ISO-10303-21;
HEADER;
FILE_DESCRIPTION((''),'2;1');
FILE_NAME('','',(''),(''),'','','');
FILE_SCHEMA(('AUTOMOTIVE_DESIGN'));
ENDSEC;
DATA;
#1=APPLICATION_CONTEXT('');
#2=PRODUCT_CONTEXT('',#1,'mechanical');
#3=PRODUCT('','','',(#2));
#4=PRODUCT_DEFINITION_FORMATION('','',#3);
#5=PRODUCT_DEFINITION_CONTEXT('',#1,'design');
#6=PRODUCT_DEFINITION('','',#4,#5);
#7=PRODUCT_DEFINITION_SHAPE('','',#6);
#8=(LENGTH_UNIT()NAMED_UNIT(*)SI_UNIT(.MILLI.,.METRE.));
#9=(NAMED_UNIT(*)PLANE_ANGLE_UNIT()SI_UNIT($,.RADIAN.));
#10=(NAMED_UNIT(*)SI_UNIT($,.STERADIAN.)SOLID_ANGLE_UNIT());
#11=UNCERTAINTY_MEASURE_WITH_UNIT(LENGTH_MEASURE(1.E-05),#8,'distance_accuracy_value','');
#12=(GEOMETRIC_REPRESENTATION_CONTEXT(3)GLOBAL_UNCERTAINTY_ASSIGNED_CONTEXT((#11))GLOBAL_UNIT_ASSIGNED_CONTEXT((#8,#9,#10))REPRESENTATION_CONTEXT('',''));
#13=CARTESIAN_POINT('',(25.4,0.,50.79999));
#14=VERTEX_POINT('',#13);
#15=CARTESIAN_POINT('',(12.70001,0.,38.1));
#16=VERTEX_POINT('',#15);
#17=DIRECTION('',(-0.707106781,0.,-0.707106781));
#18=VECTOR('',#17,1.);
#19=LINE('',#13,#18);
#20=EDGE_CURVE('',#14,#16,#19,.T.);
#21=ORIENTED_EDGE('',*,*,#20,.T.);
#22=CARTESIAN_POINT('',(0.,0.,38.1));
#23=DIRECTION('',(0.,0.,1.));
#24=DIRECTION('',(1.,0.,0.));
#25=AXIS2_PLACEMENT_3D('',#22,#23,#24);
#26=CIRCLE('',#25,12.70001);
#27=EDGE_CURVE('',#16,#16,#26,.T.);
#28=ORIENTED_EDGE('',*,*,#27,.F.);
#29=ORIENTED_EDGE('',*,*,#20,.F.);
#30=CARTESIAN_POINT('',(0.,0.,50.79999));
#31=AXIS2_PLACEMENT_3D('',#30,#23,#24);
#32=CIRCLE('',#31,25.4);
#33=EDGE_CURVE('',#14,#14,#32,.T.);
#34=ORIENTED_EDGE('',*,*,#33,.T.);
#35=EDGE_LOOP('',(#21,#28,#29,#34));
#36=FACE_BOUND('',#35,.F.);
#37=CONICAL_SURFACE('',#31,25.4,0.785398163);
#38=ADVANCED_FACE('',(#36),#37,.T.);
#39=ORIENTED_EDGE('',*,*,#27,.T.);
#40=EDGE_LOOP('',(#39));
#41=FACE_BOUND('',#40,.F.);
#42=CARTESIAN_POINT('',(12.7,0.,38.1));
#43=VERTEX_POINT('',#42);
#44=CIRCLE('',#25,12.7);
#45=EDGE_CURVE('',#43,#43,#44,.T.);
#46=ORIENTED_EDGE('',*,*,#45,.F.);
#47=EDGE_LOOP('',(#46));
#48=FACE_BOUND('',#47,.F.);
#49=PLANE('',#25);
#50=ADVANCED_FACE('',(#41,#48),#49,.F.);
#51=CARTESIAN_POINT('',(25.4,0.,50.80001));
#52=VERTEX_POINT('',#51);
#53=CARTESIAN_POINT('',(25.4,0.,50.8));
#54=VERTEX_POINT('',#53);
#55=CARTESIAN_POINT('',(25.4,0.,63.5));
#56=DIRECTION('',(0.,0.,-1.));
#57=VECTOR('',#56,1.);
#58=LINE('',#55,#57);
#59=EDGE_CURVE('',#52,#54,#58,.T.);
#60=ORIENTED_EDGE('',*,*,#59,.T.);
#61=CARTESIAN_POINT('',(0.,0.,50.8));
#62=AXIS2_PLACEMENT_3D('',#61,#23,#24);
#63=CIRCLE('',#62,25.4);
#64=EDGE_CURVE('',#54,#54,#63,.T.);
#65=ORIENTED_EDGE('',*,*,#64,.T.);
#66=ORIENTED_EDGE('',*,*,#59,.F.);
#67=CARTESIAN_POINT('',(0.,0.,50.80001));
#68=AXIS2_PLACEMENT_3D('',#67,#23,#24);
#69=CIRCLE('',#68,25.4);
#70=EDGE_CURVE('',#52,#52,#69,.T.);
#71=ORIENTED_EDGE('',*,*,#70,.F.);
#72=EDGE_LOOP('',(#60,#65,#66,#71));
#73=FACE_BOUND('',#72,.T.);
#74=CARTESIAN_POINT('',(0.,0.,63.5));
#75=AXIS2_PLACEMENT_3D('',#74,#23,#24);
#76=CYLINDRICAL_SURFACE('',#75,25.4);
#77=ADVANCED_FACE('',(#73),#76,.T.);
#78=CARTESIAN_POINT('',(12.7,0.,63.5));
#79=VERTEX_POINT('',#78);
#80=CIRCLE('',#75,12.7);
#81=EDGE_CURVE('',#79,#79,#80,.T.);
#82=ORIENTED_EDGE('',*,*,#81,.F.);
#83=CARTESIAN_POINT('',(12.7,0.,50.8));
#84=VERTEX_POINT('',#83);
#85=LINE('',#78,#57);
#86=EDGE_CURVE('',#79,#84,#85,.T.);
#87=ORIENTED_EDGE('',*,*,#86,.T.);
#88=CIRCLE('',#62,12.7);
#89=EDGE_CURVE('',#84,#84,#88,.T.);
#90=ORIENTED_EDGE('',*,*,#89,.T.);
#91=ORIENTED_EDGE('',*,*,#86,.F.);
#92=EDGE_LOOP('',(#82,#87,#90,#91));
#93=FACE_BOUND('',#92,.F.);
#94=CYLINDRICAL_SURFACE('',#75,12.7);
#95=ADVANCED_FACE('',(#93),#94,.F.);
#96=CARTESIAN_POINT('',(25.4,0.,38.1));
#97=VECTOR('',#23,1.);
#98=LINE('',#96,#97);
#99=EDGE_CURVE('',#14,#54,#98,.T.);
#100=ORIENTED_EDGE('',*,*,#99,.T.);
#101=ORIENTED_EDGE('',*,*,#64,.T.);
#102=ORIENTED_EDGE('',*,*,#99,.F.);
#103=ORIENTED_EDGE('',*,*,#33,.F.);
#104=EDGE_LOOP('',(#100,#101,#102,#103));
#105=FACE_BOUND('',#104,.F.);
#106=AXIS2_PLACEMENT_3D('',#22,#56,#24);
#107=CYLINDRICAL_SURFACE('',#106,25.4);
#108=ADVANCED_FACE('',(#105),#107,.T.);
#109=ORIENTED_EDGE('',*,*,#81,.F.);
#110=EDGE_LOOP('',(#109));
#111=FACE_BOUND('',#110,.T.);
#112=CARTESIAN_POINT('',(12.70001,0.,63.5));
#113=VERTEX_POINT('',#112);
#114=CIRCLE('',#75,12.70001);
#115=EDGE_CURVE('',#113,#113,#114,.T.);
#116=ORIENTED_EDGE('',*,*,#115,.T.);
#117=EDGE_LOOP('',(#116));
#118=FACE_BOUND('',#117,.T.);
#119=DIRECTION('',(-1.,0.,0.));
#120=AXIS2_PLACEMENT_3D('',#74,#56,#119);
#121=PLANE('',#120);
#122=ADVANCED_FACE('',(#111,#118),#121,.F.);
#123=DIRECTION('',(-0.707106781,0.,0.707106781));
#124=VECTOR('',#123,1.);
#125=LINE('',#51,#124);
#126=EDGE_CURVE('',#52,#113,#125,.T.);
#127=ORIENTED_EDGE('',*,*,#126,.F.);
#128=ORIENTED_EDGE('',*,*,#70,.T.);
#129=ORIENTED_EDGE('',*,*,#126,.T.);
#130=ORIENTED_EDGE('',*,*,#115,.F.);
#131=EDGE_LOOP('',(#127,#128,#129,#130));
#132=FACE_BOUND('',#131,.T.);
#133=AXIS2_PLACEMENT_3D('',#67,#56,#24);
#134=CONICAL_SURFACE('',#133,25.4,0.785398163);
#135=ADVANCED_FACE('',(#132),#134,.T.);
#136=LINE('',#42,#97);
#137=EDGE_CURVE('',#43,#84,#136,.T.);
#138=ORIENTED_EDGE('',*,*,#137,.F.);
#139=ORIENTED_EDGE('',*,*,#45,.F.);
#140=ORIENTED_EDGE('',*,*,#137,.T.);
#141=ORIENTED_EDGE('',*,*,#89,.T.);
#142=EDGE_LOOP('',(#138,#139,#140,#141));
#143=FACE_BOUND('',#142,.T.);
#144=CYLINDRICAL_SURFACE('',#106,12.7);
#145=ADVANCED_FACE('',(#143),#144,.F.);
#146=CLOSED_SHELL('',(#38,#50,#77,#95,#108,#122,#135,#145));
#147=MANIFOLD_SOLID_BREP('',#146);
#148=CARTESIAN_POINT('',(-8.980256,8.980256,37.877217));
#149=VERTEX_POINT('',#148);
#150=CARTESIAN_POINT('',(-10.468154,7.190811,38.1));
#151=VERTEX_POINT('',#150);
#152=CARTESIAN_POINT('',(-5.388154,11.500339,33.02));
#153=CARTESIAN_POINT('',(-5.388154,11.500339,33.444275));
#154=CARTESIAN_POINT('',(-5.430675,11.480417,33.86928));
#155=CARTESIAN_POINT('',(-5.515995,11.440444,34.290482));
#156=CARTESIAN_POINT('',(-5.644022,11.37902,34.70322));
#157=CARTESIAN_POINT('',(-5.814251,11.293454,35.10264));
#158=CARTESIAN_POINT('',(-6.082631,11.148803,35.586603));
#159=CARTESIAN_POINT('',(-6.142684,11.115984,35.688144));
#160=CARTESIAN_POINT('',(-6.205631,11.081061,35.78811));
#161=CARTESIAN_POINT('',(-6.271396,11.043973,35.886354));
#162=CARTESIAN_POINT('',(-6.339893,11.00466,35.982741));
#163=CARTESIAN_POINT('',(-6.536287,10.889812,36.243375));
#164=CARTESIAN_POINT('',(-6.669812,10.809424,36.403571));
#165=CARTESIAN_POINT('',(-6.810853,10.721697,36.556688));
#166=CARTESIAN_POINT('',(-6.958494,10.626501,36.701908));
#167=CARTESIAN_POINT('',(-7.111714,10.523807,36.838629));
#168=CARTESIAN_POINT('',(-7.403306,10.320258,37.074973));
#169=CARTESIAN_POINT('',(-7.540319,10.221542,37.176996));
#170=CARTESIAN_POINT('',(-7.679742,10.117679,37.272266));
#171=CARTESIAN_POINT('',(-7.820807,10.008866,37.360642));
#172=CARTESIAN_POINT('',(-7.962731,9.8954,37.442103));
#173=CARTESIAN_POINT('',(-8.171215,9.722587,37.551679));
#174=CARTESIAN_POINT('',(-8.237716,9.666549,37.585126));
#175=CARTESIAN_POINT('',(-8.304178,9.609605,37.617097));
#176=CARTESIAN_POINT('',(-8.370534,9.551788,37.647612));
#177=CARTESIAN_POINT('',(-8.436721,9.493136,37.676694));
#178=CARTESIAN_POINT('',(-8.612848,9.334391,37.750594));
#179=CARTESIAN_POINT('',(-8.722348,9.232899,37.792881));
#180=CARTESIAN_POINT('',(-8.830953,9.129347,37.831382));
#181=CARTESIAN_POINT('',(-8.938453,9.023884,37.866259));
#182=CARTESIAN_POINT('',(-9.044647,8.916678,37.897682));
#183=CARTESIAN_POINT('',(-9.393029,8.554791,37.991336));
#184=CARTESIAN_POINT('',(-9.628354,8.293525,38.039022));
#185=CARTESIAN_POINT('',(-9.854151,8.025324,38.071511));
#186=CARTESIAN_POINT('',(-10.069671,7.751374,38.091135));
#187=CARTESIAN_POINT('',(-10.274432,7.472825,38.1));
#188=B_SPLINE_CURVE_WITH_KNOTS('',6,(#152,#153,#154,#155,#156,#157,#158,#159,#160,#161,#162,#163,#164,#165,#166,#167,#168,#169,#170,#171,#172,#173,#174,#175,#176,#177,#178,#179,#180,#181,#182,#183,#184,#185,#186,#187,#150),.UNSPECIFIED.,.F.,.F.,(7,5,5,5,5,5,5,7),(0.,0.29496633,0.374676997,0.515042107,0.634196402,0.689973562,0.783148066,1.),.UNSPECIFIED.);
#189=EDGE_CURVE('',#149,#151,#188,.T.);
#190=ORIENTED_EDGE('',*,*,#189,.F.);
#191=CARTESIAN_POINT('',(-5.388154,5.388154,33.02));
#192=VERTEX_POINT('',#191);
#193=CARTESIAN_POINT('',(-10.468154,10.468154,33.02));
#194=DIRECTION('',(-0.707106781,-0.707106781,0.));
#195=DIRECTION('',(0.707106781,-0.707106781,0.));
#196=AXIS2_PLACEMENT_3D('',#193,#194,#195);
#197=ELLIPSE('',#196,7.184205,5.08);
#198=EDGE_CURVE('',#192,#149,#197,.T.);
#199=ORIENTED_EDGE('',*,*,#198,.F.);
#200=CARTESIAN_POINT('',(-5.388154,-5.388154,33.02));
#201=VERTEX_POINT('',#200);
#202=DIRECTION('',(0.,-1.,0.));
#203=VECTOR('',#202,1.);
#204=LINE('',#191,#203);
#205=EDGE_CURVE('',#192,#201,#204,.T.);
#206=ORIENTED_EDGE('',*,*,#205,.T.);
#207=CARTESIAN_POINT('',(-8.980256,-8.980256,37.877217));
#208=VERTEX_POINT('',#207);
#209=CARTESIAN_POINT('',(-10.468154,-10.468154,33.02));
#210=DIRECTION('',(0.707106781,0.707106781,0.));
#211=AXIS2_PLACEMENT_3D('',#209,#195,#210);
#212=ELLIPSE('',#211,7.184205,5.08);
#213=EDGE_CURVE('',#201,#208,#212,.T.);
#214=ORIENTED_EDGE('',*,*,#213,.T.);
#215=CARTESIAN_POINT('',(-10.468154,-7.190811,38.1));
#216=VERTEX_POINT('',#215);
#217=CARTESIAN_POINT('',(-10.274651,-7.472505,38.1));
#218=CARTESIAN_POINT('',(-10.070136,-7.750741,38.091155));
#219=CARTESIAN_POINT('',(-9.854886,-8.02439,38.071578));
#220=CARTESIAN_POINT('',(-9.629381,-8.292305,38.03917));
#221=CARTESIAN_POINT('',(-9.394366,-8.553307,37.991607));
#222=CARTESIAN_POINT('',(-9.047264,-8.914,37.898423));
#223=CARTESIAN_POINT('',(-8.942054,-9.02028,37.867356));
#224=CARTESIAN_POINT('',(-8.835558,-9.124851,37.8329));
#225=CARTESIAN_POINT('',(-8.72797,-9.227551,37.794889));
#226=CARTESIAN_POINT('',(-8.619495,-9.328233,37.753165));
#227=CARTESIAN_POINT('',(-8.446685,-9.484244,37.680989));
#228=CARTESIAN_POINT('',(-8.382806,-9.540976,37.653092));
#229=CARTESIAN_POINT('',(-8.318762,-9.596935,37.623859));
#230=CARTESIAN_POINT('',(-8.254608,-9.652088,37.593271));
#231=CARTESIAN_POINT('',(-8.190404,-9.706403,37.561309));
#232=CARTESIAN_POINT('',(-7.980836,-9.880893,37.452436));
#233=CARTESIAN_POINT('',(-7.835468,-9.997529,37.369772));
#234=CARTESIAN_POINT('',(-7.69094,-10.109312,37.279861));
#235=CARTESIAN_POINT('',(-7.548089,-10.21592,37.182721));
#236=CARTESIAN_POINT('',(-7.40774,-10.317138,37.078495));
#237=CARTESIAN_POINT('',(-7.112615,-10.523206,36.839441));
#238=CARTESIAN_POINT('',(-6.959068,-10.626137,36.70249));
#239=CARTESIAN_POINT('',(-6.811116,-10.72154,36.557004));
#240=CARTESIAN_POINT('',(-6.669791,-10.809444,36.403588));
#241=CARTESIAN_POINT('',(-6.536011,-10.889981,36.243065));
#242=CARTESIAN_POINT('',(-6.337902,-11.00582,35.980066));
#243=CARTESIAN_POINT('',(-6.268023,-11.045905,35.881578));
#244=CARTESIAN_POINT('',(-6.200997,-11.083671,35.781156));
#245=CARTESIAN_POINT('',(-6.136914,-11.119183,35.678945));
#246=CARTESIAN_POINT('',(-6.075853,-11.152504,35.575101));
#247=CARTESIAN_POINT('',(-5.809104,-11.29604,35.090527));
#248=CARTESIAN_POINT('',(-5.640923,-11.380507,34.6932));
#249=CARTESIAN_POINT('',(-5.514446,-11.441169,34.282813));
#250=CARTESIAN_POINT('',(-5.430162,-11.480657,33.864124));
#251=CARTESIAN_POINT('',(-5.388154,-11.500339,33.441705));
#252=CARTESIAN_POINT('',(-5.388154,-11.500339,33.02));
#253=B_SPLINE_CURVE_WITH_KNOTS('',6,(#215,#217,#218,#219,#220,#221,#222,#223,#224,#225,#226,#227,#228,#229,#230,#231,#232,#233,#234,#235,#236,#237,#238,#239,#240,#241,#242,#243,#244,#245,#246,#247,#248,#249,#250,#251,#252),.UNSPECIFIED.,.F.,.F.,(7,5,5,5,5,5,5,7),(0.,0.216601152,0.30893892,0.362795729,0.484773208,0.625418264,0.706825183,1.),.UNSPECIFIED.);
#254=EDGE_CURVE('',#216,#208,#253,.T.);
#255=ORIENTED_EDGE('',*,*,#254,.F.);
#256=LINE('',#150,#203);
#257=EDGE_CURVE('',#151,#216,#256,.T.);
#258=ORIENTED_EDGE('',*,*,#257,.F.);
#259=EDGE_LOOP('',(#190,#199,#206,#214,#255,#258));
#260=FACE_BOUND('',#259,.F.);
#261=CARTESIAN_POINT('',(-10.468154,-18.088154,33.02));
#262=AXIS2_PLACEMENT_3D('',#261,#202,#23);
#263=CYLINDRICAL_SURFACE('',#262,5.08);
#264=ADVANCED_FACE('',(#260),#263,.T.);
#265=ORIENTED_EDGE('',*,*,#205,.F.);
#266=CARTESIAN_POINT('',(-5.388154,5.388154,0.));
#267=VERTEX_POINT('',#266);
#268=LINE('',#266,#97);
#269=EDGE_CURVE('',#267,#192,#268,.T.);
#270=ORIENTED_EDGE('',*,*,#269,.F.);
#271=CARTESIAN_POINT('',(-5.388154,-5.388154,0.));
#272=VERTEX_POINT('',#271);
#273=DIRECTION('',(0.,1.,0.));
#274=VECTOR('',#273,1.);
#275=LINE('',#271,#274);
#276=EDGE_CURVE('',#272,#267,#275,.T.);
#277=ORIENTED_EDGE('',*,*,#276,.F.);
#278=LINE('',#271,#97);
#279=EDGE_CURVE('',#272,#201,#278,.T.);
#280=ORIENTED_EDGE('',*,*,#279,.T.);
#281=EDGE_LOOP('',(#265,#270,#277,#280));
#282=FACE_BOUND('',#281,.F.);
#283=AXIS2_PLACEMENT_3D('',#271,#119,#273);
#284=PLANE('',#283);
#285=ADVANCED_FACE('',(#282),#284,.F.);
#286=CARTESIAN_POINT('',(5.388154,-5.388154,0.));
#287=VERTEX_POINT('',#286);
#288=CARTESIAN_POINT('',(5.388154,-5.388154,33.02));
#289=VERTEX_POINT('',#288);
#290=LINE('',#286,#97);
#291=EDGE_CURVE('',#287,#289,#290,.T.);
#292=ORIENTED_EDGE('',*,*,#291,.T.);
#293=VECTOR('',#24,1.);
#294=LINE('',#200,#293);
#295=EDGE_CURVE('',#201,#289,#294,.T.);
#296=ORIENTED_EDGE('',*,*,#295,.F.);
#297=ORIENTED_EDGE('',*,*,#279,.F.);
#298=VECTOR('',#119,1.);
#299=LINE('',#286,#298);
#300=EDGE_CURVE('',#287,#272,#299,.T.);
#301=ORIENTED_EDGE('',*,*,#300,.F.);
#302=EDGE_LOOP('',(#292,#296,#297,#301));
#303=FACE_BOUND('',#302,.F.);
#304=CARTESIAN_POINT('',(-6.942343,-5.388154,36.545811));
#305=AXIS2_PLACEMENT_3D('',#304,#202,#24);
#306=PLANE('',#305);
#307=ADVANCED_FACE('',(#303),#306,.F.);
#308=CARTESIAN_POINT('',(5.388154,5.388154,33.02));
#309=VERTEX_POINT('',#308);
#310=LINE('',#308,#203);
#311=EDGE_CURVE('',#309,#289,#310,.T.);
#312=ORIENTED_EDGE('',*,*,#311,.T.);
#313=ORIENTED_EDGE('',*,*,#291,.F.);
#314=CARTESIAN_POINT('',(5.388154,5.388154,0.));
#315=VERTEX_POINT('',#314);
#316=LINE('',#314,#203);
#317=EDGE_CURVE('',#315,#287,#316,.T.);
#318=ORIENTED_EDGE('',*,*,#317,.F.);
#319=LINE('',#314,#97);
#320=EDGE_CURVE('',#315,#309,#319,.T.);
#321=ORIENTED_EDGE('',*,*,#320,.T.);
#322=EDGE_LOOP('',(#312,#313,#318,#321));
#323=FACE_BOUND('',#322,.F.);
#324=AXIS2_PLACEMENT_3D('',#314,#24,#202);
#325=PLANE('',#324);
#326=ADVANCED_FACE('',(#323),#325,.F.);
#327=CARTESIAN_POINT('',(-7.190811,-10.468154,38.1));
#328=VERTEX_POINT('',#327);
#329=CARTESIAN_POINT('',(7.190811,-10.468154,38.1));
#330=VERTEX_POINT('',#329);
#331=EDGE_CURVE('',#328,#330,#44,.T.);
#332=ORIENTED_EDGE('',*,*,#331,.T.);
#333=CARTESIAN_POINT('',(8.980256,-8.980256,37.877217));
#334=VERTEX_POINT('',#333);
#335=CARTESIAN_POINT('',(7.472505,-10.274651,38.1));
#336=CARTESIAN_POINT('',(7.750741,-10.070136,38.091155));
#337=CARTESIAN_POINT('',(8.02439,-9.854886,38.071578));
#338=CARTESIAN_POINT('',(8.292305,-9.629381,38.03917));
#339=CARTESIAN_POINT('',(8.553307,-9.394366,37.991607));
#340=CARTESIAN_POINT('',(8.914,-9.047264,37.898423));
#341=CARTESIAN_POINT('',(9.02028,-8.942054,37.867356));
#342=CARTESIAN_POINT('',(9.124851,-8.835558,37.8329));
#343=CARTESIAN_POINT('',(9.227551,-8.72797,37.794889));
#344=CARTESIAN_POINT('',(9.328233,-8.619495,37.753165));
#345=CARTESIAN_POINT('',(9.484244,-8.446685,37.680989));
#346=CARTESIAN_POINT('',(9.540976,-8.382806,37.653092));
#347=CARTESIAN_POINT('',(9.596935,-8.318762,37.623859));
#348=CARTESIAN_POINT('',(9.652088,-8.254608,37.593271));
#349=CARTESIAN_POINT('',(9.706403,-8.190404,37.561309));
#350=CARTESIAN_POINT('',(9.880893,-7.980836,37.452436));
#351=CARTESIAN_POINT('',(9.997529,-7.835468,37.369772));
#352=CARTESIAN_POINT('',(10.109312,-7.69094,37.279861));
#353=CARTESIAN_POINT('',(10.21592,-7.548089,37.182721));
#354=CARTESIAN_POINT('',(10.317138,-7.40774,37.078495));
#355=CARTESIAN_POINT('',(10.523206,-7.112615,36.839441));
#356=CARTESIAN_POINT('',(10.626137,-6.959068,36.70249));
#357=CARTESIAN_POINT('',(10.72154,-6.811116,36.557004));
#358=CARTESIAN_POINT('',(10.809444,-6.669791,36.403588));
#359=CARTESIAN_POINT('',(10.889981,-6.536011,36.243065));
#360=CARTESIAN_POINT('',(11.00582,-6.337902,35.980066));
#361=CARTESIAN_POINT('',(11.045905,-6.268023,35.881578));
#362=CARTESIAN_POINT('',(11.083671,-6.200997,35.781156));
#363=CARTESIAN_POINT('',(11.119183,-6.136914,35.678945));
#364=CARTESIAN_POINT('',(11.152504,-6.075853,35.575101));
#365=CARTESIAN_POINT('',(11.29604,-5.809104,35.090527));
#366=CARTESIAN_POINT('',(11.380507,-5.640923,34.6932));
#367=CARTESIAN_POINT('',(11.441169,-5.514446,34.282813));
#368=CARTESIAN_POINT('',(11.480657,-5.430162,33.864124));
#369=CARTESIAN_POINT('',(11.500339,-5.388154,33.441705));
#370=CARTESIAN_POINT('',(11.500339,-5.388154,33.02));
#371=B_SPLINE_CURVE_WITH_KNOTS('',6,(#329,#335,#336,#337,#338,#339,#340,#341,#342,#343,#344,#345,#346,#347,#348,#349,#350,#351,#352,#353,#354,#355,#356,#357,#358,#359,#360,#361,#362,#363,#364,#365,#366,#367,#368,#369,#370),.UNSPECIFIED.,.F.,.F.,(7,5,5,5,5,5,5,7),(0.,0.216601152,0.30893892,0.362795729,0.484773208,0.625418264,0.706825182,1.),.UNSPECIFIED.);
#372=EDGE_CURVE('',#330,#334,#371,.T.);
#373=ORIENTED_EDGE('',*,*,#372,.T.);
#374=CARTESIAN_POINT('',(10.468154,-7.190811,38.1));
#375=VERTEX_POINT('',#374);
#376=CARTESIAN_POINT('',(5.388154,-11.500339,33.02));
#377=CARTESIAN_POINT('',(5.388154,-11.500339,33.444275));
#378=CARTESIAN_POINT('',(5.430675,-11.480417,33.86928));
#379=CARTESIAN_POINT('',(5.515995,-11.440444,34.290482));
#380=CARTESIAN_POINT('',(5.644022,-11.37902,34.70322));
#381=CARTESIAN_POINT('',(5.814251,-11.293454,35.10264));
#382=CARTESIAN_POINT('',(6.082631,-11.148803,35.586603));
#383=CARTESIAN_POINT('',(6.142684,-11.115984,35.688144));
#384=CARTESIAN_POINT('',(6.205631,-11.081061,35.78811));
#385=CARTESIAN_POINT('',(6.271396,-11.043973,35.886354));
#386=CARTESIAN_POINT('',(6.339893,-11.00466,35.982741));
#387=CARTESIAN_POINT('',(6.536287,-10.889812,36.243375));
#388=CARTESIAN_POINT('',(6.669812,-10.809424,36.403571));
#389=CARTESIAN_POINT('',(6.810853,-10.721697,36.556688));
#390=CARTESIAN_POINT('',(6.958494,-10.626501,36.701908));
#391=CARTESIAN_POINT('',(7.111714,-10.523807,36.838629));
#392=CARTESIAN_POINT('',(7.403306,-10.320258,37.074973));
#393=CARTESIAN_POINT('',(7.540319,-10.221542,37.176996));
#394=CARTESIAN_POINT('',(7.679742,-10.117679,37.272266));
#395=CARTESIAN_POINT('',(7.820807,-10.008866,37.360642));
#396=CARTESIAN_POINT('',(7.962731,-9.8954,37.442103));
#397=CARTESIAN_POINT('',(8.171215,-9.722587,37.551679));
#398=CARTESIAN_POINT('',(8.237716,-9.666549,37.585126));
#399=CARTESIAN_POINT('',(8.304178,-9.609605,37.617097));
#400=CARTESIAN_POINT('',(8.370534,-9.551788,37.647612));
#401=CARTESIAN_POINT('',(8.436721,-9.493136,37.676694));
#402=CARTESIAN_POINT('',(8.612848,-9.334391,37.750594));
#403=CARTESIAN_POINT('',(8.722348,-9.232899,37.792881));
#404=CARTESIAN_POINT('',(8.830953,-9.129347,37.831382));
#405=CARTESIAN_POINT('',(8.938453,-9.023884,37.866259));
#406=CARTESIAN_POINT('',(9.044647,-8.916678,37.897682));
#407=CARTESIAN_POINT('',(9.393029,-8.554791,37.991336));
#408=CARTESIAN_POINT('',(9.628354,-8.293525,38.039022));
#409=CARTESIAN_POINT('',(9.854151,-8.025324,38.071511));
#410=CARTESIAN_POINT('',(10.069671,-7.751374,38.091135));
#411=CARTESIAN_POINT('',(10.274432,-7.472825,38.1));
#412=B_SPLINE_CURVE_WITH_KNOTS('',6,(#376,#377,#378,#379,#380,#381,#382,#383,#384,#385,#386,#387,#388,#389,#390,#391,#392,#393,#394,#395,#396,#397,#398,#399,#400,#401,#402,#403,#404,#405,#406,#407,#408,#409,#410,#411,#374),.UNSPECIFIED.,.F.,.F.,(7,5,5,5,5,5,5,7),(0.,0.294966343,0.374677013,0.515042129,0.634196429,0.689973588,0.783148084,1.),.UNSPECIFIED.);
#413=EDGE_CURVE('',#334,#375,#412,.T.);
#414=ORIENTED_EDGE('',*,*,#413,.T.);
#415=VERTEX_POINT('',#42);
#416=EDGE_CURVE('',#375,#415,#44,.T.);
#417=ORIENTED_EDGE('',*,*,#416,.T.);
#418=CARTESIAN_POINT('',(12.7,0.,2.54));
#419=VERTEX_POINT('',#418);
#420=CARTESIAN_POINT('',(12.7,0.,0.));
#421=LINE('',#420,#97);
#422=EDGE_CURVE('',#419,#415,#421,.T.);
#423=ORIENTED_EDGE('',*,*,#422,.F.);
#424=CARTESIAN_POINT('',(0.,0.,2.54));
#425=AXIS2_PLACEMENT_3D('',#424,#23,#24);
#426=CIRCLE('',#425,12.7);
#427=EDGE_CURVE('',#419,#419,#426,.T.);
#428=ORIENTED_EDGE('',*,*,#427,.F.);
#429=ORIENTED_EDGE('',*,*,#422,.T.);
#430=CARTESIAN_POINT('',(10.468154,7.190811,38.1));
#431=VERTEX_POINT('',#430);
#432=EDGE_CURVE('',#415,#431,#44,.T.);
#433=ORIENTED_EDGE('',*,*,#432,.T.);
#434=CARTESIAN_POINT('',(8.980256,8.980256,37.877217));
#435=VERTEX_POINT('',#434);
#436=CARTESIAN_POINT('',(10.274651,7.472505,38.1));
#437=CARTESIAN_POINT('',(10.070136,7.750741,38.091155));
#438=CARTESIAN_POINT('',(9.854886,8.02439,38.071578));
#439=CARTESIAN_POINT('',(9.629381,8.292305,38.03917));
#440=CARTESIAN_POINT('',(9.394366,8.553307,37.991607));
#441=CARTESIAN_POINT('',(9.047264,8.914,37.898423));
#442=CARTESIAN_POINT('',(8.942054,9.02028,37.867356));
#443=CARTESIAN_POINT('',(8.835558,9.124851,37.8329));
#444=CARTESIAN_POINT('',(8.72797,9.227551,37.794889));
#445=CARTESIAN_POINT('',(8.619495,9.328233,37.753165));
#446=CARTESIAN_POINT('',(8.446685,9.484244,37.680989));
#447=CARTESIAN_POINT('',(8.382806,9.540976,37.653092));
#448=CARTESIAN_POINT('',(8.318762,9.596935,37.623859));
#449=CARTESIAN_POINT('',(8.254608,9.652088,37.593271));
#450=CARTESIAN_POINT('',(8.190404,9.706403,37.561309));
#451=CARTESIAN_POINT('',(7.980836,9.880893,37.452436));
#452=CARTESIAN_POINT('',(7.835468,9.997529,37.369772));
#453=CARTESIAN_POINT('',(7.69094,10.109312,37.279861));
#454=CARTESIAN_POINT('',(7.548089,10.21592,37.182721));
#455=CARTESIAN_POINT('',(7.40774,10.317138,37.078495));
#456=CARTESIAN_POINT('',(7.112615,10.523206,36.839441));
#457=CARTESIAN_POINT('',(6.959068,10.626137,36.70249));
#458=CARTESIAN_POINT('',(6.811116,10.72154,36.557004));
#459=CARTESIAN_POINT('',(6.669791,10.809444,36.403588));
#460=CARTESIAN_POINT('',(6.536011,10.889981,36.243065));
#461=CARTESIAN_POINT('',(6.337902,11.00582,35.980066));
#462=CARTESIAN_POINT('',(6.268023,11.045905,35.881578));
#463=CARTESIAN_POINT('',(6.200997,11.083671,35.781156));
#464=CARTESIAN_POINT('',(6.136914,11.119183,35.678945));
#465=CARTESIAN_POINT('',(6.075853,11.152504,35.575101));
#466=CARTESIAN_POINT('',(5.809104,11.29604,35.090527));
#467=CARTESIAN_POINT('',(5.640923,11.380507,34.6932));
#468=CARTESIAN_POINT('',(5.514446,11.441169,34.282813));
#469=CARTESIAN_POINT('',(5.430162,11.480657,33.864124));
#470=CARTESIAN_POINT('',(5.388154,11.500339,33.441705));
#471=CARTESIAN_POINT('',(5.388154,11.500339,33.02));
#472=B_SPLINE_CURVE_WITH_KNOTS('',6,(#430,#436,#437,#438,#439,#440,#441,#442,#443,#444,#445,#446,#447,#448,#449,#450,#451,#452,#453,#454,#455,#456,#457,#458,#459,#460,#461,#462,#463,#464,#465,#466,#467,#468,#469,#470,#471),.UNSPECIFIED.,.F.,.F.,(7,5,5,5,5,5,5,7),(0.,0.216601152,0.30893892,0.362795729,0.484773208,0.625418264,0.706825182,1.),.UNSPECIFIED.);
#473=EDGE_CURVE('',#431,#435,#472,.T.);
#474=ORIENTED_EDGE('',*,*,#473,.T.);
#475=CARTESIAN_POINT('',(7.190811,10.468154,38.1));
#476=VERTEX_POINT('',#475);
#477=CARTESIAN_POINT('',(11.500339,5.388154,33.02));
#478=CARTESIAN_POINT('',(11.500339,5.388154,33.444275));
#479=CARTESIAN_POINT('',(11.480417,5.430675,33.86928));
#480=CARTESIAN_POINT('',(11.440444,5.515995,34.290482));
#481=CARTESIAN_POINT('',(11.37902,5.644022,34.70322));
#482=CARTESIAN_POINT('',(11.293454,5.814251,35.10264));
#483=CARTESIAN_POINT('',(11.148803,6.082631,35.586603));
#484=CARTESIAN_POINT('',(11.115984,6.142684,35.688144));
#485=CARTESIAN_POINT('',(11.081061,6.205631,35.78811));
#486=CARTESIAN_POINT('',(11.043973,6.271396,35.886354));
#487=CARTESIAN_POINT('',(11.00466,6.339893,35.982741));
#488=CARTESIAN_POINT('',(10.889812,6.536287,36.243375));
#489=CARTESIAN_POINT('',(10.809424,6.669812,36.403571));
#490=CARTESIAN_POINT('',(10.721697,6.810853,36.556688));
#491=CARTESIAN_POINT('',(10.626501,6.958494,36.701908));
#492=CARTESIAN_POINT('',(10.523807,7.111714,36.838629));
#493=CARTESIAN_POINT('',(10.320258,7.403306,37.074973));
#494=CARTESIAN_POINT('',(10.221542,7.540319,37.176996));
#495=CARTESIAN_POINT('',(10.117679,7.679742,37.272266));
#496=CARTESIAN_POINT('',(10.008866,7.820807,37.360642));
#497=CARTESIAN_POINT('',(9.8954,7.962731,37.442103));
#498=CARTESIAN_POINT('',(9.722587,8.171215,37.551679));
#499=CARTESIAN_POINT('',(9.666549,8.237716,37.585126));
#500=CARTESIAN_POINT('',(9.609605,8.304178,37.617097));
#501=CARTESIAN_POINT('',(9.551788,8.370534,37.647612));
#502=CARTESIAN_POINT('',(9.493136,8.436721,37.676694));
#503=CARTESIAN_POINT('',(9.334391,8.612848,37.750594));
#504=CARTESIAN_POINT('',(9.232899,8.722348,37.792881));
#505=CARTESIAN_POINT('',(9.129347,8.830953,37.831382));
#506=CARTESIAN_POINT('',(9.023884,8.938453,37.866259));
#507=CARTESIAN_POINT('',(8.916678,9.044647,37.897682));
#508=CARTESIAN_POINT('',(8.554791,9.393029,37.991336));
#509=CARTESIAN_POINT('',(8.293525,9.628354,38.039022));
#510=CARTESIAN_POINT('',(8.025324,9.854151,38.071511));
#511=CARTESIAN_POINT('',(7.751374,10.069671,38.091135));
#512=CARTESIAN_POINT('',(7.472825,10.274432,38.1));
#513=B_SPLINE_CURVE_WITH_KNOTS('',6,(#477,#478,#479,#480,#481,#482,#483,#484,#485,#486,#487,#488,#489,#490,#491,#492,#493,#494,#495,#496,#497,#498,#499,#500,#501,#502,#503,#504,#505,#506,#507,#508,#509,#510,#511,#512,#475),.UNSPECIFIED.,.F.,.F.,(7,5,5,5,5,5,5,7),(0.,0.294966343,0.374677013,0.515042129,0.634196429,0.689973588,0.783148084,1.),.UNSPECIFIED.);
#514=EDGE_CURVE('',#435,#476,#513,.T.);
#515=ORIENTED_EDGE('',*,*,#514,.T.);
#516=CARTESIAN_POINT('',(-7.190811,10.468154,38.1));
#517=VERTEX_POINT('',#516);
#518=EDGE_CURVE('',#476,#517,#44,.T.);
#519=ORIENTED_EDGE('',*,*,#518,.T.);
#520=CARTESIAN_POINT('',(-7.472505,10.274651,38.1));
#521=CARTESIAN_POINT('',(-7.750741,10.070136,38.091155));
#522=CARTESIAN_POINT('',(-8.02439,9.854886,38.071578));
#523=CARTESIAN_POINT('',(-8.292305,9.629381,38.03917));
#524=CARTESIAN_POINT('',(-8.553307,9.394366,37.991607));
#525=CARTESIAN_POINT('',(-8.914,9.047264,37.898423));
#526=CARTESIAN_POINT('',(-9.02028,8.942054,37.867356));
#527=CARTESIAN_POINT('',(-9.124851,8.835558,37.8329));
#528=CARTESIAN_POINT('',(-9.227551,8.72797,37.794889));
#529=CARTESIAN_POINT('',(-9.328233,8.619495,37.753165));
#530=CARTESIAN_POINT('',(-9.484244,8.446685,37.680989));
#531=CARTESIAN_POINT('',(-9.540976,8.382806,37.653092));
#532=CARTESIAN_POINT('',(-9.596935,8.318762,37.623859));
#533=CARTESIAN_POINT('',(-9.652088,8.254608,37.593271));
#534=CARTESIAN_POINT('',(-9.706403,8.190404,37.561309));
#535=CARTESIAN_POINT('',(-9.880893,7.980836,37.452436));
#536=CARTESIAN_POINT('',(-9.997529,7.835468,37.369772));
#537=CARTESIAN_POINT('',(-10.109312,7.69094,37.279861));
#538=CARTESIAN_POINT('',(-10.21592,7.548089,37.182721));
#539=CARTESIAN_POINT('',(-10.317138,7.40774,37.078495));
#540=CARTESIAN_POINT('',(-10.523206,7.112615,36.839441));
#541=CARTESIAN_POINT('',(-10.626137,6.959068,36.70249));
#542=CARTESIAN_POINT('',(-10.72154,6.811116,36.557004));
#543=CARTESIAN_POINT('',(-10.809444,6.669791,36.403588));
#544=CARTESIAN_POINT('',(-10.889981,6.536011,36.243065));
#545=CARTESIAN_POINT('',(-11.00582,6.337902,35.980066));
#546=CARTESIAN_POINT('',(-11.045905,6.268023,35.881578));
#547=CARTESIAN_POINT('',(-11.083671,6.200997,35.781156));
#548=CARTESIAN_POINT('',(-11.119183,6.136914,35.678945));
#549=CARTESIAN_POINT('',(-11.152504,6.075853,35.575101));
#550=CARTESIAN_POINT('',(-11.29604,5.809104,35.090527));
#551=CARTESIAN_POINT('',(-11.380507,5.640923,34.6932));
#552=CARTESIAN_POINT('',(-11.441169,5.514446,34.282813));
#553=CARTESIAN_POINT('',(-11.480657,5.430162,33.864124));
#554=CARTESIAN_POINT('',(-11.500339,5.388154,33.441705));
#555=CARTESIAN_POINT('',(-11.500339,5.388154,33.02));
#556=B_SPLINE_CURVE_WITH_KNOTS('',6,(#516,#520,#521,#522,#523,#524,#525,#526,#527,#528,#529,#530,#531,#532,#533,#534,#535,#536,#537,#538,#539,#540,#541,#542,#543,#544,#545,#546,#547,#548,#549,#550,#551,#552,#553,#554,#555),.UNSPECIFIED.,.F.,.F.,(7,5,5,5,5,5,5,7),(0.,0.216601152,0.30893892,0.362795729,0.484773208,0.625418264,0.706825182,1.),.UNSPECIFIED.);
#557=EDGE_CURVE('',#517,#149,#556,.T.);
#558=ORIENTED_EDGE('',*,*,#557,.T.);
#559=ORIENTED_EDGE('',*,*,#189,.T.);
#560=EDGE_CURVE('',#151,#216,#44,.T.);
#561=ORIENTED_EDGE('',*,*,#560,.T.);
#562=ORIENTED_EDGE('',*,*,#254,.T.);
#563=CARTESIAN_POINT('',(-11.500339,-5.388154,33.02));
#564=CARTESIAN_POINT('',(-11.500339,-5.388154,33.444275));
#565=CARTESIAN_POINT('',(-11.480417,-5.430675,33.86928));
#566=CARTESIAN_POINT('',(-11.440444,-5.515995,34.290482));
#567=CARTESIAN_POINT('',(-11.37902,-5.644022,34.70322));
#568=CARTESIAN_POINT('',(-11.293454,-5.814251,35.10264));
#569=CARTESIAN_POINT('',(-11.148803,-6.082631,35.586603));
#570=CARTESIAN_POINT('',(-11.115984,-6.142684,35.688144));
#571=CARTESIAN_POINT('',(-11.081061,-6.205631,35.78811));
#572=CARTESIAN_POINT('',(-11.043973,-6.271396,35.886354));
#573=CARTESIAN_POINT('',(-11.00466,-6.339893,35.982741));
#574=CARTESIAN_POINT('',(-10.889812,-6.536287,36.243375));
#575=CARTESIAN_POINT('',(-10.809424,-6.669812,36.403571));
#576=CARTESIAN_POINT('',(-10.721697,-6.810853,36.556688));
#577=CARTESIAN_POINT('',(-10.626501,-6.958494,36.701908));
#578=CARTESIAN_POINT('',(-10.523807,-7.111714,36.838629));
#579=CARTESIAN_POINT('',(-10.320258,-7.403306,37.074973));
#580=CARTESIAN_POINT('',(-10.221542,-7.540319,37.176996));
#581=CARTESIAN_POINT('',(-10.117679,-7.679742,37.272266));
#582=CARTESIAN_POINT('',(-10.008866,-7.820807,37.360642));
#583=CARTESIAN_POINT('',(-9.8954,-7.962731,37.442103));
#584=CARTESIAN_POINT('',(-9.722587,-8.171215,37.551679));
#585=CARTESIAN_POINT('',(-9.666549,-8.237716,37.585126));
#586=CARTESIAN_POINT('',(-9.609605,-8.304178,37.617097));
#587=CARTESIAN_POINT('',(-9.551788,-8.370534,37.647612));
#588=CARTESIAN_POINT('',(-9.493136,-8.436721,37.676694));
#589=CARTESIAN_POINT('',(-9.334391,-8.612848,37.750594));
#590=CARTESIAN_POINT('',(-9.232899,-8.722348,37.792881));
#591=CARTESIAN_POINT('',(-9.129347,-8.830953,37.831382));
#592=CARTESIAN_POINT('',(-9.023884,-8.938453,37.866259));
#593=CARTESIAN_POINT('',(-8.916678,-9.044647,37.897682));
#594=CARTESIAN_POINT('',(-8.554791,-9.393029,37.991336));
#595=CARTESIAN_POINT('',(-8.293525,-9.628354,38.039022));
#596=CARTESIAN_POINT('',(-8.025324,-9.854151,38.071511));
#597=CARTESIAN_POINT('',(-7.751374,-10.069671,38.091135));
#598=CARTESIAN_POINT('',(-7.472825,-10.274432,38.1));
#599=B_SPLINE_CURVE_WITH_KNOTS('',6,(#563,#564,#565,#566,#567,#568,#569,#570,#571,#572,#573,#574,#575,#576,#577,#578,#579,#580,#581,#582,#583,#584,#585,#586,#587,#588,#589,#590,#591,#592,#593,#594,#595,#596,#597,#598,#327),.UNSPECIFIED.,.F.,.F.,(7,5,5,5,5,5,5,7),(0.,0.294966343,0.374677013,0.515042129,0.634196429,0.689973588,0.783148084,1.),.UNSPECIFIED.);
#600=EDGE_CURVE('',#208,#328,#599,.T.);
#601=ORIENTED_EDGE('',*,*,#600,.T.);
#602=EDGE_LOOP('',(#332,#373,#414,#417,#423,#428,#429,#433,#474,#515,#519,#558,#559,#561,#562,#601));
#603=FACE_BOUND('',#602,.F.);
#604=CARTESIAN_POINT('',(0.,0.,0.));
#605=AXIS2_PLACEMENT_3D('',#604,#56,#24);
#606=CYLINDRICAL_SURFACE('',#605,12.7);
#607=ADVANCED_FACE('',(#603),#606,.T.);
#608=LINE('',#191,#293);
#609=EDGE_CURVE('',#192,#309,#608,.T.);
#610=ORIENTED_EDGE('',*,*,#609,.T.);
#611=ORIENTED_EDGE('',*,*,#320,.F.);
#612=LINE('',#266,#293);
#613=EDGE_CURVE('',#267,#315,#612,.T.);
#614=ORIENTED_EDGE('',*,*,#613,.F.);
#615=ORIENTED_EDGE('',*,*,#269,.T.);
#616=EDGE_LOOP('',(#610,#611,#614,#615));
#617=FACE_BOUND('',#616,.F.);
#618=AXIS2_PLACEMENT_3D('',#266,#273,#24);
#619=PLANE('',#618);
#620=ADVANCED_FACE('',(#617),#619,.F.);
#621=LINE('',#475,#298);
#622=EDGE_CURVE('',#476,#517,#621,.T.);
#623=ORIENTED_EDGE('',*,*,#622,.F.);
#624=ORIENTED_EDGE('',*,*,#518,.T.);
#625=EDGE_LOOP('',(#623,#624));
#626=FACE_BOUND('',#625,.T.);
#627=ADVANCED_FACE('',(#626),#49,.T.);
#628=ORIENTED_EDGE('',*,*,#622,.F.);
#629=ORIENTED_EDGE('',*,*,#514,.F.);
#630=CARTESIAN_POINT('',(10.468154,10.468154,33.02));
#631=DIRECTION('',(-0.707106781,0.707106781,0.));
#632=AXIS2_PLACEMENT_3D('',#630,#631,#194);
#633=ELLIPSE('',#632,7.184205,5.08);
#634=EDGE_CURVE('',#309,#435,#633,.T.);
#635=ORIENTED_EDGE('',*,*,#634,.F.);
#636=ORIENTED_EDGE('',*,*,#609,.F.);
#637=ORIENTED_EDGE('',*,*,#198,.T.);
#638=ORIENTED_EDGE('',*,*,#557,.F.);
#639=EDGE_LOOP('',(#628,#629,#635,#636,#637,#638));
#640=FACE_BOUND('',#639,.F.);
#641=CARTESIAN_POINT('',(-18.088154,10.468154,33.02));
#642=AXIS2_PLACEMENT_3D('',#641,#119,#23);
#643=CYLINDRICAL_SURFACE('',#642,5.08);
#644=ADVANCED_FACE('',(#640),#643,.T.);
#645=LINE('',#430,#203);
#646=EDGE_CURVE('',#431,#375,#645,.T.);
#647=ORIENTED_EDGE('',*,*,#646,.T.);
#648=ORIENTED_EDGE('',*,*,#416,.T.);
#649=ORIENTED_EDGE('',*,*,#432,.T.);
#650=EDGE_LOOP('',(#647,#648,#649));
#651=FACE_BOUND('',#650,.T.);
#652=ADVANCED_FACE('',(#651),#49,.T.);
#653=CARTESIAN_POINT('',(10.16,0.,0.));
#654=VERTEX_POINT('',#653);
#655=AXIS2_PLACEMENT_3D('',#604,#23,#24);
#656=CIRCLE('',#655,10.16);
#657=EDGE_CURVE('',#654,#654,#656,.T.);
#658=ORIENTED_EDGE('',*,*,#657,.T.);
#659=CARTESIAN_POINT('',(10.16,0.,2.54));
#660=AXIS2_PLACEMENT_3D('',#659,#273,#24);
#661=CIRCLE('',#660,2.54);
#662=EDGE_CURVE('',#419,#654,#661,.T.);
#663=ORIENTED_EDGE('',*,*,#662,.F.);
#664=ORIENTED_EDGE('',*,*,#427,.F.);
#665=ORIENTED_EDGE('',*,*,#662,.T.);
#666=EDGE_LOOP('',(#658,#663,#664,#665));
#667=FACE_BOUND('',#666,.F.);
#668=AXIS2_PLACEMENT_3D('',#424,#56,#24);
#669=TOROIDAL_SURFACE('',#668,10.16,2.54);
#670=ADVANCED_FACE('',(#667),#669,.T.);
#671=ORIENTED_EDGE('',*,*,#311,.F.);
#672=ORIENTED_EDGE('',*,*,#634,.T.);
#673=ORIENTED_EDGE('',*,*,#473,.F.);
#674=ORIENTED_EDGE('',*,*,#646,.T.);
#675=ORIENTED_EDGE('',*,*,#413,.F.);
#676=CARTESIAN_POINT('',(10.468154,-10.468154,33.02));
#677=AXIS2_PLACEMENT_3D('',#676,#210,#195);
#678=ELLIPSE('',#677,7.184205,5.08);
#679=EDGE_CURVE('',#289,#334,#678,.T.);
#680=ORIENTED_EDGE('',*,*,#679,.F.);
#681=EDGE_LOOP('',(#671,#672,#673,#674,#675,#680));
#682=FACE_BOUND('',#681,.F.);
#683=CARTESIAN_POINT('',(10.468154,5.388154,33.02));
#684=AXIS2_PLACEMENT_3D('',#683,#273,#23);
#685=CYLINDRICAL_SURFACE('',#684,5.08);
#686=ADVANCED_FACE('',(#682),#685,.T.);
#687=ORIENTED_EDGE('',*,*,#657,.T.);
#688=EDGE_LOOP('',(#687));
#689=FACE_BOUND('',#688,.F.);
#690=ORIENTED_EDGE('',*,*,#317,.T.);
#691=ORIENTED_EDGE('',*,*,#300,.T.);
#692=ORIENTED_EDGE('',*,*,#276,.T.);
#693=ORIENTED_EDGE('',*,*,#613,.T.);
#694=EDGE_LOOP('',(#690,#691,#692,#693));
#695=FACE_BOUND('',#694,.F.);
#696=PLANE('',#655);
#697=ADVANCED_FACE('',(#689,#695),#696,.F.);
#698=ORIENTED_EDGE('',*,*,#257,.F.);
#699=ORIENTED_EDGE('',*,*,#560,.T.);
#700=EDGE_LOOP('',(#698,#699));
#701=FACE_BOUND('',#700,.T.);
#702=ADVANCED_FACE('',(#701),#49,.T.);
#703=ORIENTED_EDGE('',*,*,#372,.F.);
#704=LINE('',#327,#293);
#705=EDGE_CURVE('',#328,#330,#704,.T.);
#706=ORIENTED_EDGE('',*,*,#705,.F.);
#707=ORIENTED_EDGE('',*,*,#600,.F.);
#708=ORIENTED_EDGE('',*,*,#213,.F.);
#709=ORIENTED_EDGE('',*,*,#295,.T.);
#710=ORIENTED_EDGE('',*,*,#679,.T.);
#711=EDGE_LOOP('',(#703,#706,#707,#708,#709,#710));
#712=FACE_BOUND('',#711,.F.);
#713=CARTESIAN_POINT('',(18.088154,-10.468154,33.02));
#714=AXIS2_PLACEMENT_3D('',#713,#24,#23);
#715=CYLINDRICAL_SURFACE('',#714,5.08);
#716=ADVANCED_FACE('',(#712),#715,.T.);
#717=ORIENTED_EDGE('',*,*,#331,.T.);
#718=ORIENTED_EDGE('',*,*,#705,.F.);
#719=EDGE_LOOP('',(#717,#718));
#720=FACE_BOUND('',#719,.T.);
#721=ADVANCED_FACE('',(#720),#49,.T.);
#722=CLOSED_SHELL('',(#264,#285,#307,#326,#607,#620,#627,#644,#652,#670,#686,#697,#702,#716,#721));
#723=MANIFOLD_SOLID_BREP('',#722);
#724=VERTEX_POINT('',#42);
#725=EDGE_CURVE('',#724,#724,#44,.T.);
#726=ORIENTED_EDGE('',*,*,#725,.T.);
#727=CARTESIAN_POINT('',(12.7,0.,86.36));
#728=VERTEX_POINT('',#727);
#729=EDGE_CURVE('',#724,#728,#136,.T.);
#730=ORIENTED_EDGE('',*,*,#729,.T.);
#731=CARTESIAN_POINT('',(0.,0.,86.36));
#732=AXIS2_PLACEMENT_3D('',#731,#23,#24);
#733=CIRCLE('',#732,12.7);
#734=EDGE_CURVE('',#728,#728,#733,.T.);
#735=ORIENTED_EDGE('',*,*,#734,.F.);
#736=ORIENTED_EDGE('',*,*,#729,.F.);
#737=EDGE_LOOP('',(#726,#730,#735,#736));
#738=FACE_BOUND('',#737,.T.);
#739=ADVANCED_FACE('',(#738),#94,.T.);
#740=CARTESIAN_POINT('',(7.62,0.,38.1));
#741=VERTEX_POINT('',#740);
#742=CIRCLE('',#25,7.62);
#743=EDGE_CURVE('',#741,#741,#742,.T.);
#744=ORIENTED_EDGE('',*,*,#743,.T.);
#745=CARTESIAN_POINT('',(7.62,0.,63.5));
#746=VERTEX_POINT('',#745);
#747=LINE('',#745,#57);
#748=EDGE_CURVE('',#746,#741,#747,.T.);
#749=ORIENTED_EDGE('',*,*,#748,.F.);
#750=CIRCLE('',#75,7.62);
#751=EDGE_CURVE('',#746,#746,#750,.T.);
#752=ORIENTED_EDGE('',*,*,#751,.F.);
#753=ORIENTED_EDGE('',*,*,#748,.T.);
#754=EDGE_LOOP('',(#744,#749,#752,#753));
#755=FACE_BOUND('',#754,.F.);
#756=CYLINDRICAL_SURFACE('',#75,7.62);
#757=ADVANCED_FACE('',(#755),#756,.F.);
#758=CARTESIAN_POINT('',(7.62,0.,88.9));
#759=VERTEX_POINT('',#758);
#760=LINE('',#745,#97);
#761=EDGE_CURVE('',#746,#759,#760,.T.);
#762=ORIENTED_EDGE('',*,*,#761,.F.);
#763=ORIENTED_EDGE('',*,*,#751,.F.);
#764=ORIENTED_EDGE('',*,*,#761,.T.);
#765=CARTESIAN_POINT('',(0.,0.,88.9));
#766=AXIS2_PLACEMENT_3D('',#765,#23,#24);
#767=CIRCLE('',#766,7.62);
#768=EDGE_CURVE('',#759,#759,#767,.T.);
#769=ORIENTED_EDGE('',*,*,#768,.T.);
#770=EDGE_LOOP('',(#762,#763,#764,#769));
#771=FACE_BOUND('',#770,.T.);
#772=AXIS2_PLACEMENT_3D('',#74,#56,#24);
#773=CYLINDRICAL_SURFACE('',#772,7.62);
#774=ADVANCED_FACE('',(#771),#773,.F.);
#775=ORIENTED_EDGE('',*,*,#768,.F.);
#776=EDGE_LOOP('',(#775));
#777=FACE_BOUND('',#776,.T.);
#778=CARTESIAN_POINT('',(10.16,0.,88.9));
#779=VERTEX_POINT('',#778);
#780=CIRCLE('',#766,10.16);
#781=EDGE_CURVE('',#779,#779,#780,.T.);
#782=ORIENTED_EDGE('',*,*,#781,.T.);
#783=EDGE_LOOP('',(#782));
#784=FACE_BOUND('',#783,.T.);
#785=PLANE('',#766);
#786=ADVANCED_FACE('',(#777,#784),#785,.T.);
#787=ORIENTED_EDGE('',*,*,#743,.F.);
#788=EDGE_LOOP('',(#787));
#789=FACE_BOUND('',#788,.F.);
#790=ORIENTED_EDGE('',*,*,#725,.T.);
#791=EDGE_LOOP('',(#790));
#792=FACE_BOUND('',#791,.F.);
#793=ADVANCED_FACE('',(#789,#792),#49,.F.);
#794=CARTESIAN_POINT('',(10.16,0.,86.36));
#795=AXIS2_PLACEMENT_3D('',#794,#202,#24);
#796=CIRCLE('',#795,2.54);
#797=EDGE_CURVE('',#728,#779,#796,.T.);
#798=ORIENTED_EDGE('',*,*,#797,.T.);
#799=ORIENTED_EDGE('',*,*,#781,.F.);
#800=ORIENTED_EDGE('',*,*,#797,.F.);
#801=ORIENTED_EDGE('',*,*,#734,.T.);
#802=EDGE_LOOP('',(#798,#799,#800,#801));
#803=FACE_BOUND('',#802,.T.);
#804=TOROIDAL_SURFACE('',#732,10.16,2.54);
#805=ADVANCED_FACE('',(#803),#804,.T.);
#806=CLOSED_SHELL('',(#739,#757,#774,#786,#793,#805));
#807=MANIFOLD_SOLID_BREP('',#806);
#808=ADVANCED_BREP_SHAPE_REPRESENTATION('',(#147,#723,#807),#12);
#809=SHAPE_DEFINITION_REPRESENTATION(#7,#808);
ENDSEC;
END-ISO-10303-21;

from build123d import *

# Parameters (mm, degrees)
F0_R         = 12.7
F1_DEPTH     = 38.1
F2_R         = 25.4
F2_R_2       = 12.7
F3_DEPTH     = 12.7
F4_R         = 2.54
F5_T1_DEPTH  = 10.7763073453
F5_T3_DEPTH  = 10.7763073453
F5_T9_DEPTH  = 23.4763073453
F5_S10_R     = 12.7
F5_T11_DEPTH = 14
F5_T15_DEPTH = 23.4763073453
F5_S16_R     = 12.7
F5_T17_DEPTH = 14
F5_T24_DEPTH = 23.4763073453
F5_S25_R     = 12.7
F5_T26_DEPTH = 14
F5_T30_DEPTH = 23.4763073453
F5_S31_R     = 12.7
F5_T32_DEPTH = 14
F5_T39_DEPTH = 23.4763073453
F5_S40_R     = 12.7
F5_T41_DEPTH = 14
F5_T45_DEPTH = 23.4763073453
F5_S46_R     = 12.7
F5_T47_DEPTH = 14
F5_T54_DEPTH = 23.4763073453
F5_S55_R     = 12.7
F5_T56_DEPTH = 14
F5_T60_DEPTH = 23.4763073453
F5_S61_R     = 12.7
F5_T62_DEPTH = 14
F8_R         = 12.7
F8_R_2       = 7.62
F9_DEPTH     = 25.4
F10_R        = 2.54
F11_DEPTH    = 25.4
F12_SIZE     = 12.69999


# Not quite as in the source:
# - a fillet or chamfer that OpenCascade refuses, or shapes differently, is made with other operations: its cross-section is extruded or revolved along the edge and cut away or added
# - a fillet or chamfer is up to 0.001 mm smaller than in the source, because OpenCascade refuses the exact size


with BuildPart() as f1:
    # F0 (on Top) → F1 (new body)
    with BuildSketch(Plane.XY):
        Circle(F0_R)
        with BuildLine():
            ThreePointArc((5.3881536726, 5.3881536726), (7.0399620377, 2.9160477546), (7.62, 0))
            ThreePointArc((7.62, 0), (7.0399620377, -2.9160477546), (5.3881536726, -5.3881536726))
            ThreePointArc((5.3881536726, -5.3881536726), (0, -7.62), (-5.3881536726, -5.3881536726))
            ThreePointArc((-5.3881536726, -5.3881536726), (-7.62, 0), (-5.3881536726, 5.3881536726))
            ThreePointArc((-5.3881536726, 5.3881536726), (0, 7.62), (5.3881536726, 5.3881536726))
        make_face(mode=Mode.SUBTRACT)
        with BuildLine():
            ThreePointArc((-5.3881536726, -5.3881536726), (0, -7.62), (5.3881536726, -5.3881536726))
            Line((5.3881536726, -5.3881536726), (-5.3881536726, -5.3881536726))
        make_face()
        with BuildLine():
            Line((-5.3881536726, -5.3881536726), (-5.3881536726, 5.3881536726))
            ThreePointArc((-5.3881536726, 5.3881536726), (-7.62, 0), (-5.3881536726, -5.3881536726))
        make_face()
        with BuildLine():
            ThreePointArc((5.3881536726, -5.3881536726), (7.0399620377, -2.9160477546), (7.62, 0))
            ThreePointArc((7.62, 0), (7.0399620377, 2.9160477546), (5.3881536726, 5.3881536726))
            Line((5.3881536726, 5.3881536726), (5.3881536726, -5.3881536726))
        make_face()
        with BuildLine():
            Line((-5.3881536726, 5.3881536726), (5.3881536726, 5.3881536726))
            ThreePointArc((5.3881536726, 5.3881536726), (0, 7.62), (-5.3881536726, 5.3881536726))
        make_face()
    extrude(amount=F1_DEPTH)

    # F4
    f4_edges = [f1.edges().sort_by_distance(p)[0] for p in [
        (-12.7, 0, 0),
    ]]
    fillet(f4_edges, radius=F4_R)

    # F5: fillet of radius 5.08 on 4 edges, made by hand

    # F5_s2 → F5_t1 (cut)
    with BuildSketch(Plane.XZ.offset(-5.3881536726)):
        with BuildLine():
            ThreePointArc((10.4681536726, 38.1), (6.8760512242, 36.6121024484), (5.3881536726, 33.02))
            Line((5.3881536726, 33.02), (5.3881536726, 38.1))
            Line((5.3881536726, 38.1), (10.4681536726, 38.1))
        make_face()
        with BuildLine():
            ThreePointArc((-10.4681536726, 38.1), (-6.8760512242, 36.6121024484), (-5.3881536726, 33.02))
            Line((-5.3881536726, 33.02), (-5.3881536726, 38.1))
            Line((-5.3881536726, 38.1), (-10.4681536726, 38.1))
        make_face()
    extrude(amount=F5_T1_DEPTH, mode=Mode.SUBTRACT)

    # F5_s4 → F5_t3 (cut)
    with BuildSketch(Plane.YZ.offset(-5.3881536726)):
        with BuildLine():
            ThreePointArc((-10.4681536726, 38.1), (-6.8760512242, 36.6121024484), (-5.3881536726, 33.02))
            Line((-5.3881536726, 33.02), (-5.3881536726, 38.1))
            Line((-5.3881536726, 38.1), (-10.4681536726, 38.1))
        make_face()
        with BuildLine():
            ThreePointArc((10.4681536726, 38.1), (6.8760512242, 36.6121024484), (5.3881536726, 33.02))
            Line((5.3881536726, 33.02), (5.3881536726, 38.1))
            Line((5.3881536726, 38.1), (10.4681536726, 38.1))
        make_face()
    extrude(amount=F5_T3_DEPTH, mode=Mode.SUBTRACT)


with BuildPart() as f3:
    # F2 (on face) → F3 (new body)
    with BuildSketch(Plane.XY.offset(38.1)):
        Circle(F2_R)
        Circle(F2_R_2, mode=Mode.SUBTRACT)
    extrude(amount=F3_DEPTH)

    # F6: F3 across face


with BuildPart() as f5_tool7:
    # F5_s8 → F5_t9 (new body)
    with BuildSketch(Plane.YZ.offset(-5.3881536726)):
        with BuildLine():
            ThreePointArc((10.4681536726, 38.1), (6.8760512242, 36.6121024484), (5.3881536726, 33.02))
            Line((5.3881536726, 33.02), (5.3881536726, 38.1))
            Line((5.3881536726, 38.1), (10.4681536726, 38.1))
        make_face()
    extrude(amount=F5_T9_DEPTH)

    # F5_s10 → F5_t11 (intersect, symmetric)
    with BuildSketch(Plane.XY.offset(35.6)):
        Circle(F5_S10_R)
    extrude(amount=F5_T11_DEPTH, both=True, mode=Mode.INTERSECT)

    split(bisect_by=Plane.YZ.offset(5.3881536726), keep=Keep.TOP)


with BuildPart() as f5_tool13:
    # F5_s14 → F5_t15 (new body)
    with BuildSketch(Plane.XZ.offset(-18.0881536726)):
        with BuildLine():
            ThreePointArc((10.4681536726, 38.1), (6.8760512242, 36.6121024484), (5.3881536726, 33.02))
            Line((5.3881536726, 33.02), (5.3881536726, 38.1))
            Line((5.3881536726, 38.1), (10.4681536726, 38.1))
        make_face()
    extrude(amount=F5_T15_DEPTH)

    # F5_s16 → F5_t17 (intersect, symmetric)
    with BuildSketch(Plane.XY.offset(35.6)):
        Circle(F5_S16_R)
    extrude(amount=F5_T17_DEPTH, both=True, mode=Mode.INTERSECT)

    split(bisect_by=Plane.XZ.offset(-5.3881536726), keep=Keep.BOTTOM)


with BuildPart() as f5_tool7_1:
    add(f5_tool7.part)

    # F5_t19: intersect F5_tool13
    add(f5_tool13.part, mode=Mode.INTERSECT)


with BuildPart() as f1_1:
    add(f1.part)

    # F5_t5: cut F5_tool7
    add(f5_tool7_1.part, mode=Mode.SUBTRACT)


with BuildPart() as f5_tool22:
    # F5_s23 → F5_t24 (new body)
    with BuildSketch(Plane.YZ.offset(18.0881536726)):
        with BuildLine():
            ThreePointArc((-10.4681536726, 38.1), (-6.8760512242, 36.6121024484), (-5.3881536726, 33.02))
            Line((-5.3881536726, 33.02), (-5.3881536726, 38.1))
            Line((-5.3881536726, 38.1), (-10.4681536726, 38.1))
        make_face()
    extrude(amount=-F5_T24_DEPTH)

    # F5_s25 → F5_t26 (intersect, symmetric)
    with BuildSketch(Plane.XY.offset(35.6)):
        Circle(F5_S25_R)
    extrude(amount=F5_T26_DEPTH, both=True, mode=Mode.INTERSECT)

    split(bisect_by=Plane.YZ.offset(5.3881536726), keep=Keep.TOP)


with BuildPart() as f5_tool28:
    # F5_s29 → F5_t30 (new body)
    with BuildSketch(Plane.XZ.offset(-5.3881536726)):
        with BuildLine():
            ThreePointArc((10.4681536726, 38.1), (6.8760512242, 36.6121024484), (5.3881536726, 33.02))
            Line((5.3881536726, 33.02), (5.3881536726, 38.1))
            Line((5.3881536726, 38.1), (10.4681536726, 38.1))
        make_face()
    extrude(amount=F5_T30_DEPTH)

    # F5_s31 → F5_t32 (intersect, symmetric)
    with BuildSketch(Plane.XY.offset(35.6)):
        Circle(F5_S31_R)
    extrude(amount=F5_T32_DEPTH, both=True, mode=Mode.INTERSECT)

    split(bisect_by=Plane.XZ.offset(5.3881536726), keep=Keep.TOP)


with BuildPart() as f5_tool22_1:
    add(f5_tool22.part)

    # F5_t34: intersect F5_tool28
    add(f5_tool28.part, mode=Mode.INTERSECT)


with BuildPart() as f1_2:
    add(f1_1.part)

    # F5_t20: cut F5_tool22
    add(f5_tool22_1.part, mode=Mode.SUBTRACT)


with BuildPart() as f5_tool37:
    # F5_s38 → F5_t39 (new body)
    with BuildSketch(Plane.YZ.offset(5.3881536726)):
        with BuildLine():
            ThreePointArc((-10.4681536726, 38.1), (-6.8760512242, 36.6121024484), (-5.3881536726, 33.02))
            Line((-5.3881536726, 33.02), (-5.3881536726, 38.1))
            Line((-5.3881536726, 38.1), (-10.4681536726, 38.1))
        make_face()
    extrude(amount=-F5_T39_DEPTH)

    # F5_s40 → F5_t41 (intersect, symmetric)
    with BuildSketch(Plane.XY.offset(35.6)):
        Circle(F5_S40_R)
    extrude(amount=F5_T41_DEPTH, both=True, mode=Mode.INTERSECT)

    split(bisect_by=Plane.YZ.offset(-5.3881536726), keep=Keep.BOTTOM)


with BuildPart() as f5_tool43:
    # F5_s44 → F5_t45 (new body)
    with BuildSketch(Plane.XZ.offset(18.0881536726)):
        with BuildLine():
            ThreePointArc((-10.4681536726, 38.1), (-6.8760512242, 36.6121024484), (-5.3881536726, 33.02))
            Line((-5.3881536726, 33.02), (-5.3881536726, 38.1))
            Line((-5.3881536726, 38.1), (-10.4681536726, 38.1))
        make_face()
    extrude(amount=-F5_T45_DEPTH)

    # F5_s46 → F5_t47 (intersect, symmetric)
    with BuildSketch(Plane.XY.offset(35.6)):
        Circle(F5_S46_R)
    extrude(amount=F5_T47_DEPTH, both=True, mode=Mode.INTERSECT)

    split(bisect_by=Plane.XZ.offset(5.3881536726), keep=Keep.TOP)


with BuildPart() as f5_tool37_1:
    add(f5_tool37.part)

    # F5_t49: intersect F5_tool43
    add(f5_tool43.part, mode=Mode.INTERSECT)


with BuildPart() as f1_3:
    add(f1_2.part)

    # F5_t35: cut F5_tool37
    add(f5_tool37_1.part, mode=Mode.SUBTRACT)


with BuildPart() as f5_tool52:
    # F5_s53 → F5_t54 (new body)
    with BuildSketch(Plane.XZ.offset(5.3881536726)):
        with BuildLine():
            ThreePointArc((-10.4681536726, 38.1), (-6.8760512242, 36.6121024484), (-5.3881536726, 33.02))
            Line((-5.3881536726, 33.02), (-5.3881536726, 38.1))
            Line((-5.3881536726, 38.1), (-10.4681536726, 38.1))
        make_face()
    extrude(amount=-F5_T54_DEPTH)

    # F5_s55 → F5_t56 (intersect, symmetric)
    with BuildSketch(Plane.XY.offset(35.6)):
        Circle(F5_S55_R)
    extrude(amount=F5_T56_DEPTH, both=True, mode=Mode.INTERSECT)

    split(bisect_by=Plane.XZ.offset(-5.3881536726), keep=Keep.BOTTOM)


with BuildPart() as f5_tool58:
    # F5_s59 → F5_t60 (new body)
    with BuildSketch(Plane.YZ.offset(-18.0881536726)):
        with BuildLine():
            ThreePointArc((10.4681536726, 38.1), (6.8760512242, 36.6121024484), (5.3881536726, 33.02))
            Line((5.3881536726, 33.02), (5.3881536726, 38.1))
            Line((5.3881536726, 38.1), (10.4681536726, 38.1))
        make_face()
    extrude(amount=F5_T60_DEPTH)

    # F5_s61 → F5_t62 (intersect, symmetric)
    with BuildSketch(Plane.XY.offset(35.6)):
        Circle(F5_S61_R)
    extrude(amount=F5_T62_DEPTH, both=True, mode=Mode.INTERSECT)

    split(bisect_by=Plane.YZ.offset(-5.3881536726), keep=Keep.BOTTOM)


with BuildPart() as f5_tool52_1:
    add(f5_tool52.part)

    # F5_t64: intersect F5_tool58
    add(f5_tool58.part, mode=Mode.INTERSECT)


with BuildPart() as f1_4:
    add(f1_3.part)

    # F5_t50: cut F5_tool52
    add(f5_tool52_1.part, mode=Mode.SUBTRACT)


with BuildPart() as f3_1:
    add(f3.part)
    add(f3.part.mirror(Plane.XY.offset(50.8)))

    # F12 (size 12.7 in the source; OpenCascade refuses exactly that, so slightly less here)
    f12_edges = [f3_1.edges().sort_by_distance(p)[0] for p in [
        (-25.4, 0, 38.1),
        (-25.4, 0, 63.5),
    ]]
    chamfer(f12_edges, length=F12_SIZE)


with BuildPart() as f9:
    # F8 (on offset) → F9 (new body)
    with BuildSketch(Plane.XY.offset(63.5)):
        Circle(F8_R)
        Circle(F8_R_2, mode=Mode.SUBTRACT)
    extrude(amount=F9_DEPTH)

    # F10
    f10_edges = [f9.edges().sort_by_distance(p)[0] for p in [
        (-12.7, 0, 88.9),
    ]]
    fillet(f10_edges, radius=F10_R)

    # F8 (on offset) → F11 (join)
    with BuildSketch(Plane.XY.offset(63.5)):
        Circle(F8_R)
        Circle(F8_R_2, mode=Mode.SUBTRACT)
    extrude(amount=-F11_DEPTH)


solid = Compound([f1_4.part, f3_1.part, f9.part])
